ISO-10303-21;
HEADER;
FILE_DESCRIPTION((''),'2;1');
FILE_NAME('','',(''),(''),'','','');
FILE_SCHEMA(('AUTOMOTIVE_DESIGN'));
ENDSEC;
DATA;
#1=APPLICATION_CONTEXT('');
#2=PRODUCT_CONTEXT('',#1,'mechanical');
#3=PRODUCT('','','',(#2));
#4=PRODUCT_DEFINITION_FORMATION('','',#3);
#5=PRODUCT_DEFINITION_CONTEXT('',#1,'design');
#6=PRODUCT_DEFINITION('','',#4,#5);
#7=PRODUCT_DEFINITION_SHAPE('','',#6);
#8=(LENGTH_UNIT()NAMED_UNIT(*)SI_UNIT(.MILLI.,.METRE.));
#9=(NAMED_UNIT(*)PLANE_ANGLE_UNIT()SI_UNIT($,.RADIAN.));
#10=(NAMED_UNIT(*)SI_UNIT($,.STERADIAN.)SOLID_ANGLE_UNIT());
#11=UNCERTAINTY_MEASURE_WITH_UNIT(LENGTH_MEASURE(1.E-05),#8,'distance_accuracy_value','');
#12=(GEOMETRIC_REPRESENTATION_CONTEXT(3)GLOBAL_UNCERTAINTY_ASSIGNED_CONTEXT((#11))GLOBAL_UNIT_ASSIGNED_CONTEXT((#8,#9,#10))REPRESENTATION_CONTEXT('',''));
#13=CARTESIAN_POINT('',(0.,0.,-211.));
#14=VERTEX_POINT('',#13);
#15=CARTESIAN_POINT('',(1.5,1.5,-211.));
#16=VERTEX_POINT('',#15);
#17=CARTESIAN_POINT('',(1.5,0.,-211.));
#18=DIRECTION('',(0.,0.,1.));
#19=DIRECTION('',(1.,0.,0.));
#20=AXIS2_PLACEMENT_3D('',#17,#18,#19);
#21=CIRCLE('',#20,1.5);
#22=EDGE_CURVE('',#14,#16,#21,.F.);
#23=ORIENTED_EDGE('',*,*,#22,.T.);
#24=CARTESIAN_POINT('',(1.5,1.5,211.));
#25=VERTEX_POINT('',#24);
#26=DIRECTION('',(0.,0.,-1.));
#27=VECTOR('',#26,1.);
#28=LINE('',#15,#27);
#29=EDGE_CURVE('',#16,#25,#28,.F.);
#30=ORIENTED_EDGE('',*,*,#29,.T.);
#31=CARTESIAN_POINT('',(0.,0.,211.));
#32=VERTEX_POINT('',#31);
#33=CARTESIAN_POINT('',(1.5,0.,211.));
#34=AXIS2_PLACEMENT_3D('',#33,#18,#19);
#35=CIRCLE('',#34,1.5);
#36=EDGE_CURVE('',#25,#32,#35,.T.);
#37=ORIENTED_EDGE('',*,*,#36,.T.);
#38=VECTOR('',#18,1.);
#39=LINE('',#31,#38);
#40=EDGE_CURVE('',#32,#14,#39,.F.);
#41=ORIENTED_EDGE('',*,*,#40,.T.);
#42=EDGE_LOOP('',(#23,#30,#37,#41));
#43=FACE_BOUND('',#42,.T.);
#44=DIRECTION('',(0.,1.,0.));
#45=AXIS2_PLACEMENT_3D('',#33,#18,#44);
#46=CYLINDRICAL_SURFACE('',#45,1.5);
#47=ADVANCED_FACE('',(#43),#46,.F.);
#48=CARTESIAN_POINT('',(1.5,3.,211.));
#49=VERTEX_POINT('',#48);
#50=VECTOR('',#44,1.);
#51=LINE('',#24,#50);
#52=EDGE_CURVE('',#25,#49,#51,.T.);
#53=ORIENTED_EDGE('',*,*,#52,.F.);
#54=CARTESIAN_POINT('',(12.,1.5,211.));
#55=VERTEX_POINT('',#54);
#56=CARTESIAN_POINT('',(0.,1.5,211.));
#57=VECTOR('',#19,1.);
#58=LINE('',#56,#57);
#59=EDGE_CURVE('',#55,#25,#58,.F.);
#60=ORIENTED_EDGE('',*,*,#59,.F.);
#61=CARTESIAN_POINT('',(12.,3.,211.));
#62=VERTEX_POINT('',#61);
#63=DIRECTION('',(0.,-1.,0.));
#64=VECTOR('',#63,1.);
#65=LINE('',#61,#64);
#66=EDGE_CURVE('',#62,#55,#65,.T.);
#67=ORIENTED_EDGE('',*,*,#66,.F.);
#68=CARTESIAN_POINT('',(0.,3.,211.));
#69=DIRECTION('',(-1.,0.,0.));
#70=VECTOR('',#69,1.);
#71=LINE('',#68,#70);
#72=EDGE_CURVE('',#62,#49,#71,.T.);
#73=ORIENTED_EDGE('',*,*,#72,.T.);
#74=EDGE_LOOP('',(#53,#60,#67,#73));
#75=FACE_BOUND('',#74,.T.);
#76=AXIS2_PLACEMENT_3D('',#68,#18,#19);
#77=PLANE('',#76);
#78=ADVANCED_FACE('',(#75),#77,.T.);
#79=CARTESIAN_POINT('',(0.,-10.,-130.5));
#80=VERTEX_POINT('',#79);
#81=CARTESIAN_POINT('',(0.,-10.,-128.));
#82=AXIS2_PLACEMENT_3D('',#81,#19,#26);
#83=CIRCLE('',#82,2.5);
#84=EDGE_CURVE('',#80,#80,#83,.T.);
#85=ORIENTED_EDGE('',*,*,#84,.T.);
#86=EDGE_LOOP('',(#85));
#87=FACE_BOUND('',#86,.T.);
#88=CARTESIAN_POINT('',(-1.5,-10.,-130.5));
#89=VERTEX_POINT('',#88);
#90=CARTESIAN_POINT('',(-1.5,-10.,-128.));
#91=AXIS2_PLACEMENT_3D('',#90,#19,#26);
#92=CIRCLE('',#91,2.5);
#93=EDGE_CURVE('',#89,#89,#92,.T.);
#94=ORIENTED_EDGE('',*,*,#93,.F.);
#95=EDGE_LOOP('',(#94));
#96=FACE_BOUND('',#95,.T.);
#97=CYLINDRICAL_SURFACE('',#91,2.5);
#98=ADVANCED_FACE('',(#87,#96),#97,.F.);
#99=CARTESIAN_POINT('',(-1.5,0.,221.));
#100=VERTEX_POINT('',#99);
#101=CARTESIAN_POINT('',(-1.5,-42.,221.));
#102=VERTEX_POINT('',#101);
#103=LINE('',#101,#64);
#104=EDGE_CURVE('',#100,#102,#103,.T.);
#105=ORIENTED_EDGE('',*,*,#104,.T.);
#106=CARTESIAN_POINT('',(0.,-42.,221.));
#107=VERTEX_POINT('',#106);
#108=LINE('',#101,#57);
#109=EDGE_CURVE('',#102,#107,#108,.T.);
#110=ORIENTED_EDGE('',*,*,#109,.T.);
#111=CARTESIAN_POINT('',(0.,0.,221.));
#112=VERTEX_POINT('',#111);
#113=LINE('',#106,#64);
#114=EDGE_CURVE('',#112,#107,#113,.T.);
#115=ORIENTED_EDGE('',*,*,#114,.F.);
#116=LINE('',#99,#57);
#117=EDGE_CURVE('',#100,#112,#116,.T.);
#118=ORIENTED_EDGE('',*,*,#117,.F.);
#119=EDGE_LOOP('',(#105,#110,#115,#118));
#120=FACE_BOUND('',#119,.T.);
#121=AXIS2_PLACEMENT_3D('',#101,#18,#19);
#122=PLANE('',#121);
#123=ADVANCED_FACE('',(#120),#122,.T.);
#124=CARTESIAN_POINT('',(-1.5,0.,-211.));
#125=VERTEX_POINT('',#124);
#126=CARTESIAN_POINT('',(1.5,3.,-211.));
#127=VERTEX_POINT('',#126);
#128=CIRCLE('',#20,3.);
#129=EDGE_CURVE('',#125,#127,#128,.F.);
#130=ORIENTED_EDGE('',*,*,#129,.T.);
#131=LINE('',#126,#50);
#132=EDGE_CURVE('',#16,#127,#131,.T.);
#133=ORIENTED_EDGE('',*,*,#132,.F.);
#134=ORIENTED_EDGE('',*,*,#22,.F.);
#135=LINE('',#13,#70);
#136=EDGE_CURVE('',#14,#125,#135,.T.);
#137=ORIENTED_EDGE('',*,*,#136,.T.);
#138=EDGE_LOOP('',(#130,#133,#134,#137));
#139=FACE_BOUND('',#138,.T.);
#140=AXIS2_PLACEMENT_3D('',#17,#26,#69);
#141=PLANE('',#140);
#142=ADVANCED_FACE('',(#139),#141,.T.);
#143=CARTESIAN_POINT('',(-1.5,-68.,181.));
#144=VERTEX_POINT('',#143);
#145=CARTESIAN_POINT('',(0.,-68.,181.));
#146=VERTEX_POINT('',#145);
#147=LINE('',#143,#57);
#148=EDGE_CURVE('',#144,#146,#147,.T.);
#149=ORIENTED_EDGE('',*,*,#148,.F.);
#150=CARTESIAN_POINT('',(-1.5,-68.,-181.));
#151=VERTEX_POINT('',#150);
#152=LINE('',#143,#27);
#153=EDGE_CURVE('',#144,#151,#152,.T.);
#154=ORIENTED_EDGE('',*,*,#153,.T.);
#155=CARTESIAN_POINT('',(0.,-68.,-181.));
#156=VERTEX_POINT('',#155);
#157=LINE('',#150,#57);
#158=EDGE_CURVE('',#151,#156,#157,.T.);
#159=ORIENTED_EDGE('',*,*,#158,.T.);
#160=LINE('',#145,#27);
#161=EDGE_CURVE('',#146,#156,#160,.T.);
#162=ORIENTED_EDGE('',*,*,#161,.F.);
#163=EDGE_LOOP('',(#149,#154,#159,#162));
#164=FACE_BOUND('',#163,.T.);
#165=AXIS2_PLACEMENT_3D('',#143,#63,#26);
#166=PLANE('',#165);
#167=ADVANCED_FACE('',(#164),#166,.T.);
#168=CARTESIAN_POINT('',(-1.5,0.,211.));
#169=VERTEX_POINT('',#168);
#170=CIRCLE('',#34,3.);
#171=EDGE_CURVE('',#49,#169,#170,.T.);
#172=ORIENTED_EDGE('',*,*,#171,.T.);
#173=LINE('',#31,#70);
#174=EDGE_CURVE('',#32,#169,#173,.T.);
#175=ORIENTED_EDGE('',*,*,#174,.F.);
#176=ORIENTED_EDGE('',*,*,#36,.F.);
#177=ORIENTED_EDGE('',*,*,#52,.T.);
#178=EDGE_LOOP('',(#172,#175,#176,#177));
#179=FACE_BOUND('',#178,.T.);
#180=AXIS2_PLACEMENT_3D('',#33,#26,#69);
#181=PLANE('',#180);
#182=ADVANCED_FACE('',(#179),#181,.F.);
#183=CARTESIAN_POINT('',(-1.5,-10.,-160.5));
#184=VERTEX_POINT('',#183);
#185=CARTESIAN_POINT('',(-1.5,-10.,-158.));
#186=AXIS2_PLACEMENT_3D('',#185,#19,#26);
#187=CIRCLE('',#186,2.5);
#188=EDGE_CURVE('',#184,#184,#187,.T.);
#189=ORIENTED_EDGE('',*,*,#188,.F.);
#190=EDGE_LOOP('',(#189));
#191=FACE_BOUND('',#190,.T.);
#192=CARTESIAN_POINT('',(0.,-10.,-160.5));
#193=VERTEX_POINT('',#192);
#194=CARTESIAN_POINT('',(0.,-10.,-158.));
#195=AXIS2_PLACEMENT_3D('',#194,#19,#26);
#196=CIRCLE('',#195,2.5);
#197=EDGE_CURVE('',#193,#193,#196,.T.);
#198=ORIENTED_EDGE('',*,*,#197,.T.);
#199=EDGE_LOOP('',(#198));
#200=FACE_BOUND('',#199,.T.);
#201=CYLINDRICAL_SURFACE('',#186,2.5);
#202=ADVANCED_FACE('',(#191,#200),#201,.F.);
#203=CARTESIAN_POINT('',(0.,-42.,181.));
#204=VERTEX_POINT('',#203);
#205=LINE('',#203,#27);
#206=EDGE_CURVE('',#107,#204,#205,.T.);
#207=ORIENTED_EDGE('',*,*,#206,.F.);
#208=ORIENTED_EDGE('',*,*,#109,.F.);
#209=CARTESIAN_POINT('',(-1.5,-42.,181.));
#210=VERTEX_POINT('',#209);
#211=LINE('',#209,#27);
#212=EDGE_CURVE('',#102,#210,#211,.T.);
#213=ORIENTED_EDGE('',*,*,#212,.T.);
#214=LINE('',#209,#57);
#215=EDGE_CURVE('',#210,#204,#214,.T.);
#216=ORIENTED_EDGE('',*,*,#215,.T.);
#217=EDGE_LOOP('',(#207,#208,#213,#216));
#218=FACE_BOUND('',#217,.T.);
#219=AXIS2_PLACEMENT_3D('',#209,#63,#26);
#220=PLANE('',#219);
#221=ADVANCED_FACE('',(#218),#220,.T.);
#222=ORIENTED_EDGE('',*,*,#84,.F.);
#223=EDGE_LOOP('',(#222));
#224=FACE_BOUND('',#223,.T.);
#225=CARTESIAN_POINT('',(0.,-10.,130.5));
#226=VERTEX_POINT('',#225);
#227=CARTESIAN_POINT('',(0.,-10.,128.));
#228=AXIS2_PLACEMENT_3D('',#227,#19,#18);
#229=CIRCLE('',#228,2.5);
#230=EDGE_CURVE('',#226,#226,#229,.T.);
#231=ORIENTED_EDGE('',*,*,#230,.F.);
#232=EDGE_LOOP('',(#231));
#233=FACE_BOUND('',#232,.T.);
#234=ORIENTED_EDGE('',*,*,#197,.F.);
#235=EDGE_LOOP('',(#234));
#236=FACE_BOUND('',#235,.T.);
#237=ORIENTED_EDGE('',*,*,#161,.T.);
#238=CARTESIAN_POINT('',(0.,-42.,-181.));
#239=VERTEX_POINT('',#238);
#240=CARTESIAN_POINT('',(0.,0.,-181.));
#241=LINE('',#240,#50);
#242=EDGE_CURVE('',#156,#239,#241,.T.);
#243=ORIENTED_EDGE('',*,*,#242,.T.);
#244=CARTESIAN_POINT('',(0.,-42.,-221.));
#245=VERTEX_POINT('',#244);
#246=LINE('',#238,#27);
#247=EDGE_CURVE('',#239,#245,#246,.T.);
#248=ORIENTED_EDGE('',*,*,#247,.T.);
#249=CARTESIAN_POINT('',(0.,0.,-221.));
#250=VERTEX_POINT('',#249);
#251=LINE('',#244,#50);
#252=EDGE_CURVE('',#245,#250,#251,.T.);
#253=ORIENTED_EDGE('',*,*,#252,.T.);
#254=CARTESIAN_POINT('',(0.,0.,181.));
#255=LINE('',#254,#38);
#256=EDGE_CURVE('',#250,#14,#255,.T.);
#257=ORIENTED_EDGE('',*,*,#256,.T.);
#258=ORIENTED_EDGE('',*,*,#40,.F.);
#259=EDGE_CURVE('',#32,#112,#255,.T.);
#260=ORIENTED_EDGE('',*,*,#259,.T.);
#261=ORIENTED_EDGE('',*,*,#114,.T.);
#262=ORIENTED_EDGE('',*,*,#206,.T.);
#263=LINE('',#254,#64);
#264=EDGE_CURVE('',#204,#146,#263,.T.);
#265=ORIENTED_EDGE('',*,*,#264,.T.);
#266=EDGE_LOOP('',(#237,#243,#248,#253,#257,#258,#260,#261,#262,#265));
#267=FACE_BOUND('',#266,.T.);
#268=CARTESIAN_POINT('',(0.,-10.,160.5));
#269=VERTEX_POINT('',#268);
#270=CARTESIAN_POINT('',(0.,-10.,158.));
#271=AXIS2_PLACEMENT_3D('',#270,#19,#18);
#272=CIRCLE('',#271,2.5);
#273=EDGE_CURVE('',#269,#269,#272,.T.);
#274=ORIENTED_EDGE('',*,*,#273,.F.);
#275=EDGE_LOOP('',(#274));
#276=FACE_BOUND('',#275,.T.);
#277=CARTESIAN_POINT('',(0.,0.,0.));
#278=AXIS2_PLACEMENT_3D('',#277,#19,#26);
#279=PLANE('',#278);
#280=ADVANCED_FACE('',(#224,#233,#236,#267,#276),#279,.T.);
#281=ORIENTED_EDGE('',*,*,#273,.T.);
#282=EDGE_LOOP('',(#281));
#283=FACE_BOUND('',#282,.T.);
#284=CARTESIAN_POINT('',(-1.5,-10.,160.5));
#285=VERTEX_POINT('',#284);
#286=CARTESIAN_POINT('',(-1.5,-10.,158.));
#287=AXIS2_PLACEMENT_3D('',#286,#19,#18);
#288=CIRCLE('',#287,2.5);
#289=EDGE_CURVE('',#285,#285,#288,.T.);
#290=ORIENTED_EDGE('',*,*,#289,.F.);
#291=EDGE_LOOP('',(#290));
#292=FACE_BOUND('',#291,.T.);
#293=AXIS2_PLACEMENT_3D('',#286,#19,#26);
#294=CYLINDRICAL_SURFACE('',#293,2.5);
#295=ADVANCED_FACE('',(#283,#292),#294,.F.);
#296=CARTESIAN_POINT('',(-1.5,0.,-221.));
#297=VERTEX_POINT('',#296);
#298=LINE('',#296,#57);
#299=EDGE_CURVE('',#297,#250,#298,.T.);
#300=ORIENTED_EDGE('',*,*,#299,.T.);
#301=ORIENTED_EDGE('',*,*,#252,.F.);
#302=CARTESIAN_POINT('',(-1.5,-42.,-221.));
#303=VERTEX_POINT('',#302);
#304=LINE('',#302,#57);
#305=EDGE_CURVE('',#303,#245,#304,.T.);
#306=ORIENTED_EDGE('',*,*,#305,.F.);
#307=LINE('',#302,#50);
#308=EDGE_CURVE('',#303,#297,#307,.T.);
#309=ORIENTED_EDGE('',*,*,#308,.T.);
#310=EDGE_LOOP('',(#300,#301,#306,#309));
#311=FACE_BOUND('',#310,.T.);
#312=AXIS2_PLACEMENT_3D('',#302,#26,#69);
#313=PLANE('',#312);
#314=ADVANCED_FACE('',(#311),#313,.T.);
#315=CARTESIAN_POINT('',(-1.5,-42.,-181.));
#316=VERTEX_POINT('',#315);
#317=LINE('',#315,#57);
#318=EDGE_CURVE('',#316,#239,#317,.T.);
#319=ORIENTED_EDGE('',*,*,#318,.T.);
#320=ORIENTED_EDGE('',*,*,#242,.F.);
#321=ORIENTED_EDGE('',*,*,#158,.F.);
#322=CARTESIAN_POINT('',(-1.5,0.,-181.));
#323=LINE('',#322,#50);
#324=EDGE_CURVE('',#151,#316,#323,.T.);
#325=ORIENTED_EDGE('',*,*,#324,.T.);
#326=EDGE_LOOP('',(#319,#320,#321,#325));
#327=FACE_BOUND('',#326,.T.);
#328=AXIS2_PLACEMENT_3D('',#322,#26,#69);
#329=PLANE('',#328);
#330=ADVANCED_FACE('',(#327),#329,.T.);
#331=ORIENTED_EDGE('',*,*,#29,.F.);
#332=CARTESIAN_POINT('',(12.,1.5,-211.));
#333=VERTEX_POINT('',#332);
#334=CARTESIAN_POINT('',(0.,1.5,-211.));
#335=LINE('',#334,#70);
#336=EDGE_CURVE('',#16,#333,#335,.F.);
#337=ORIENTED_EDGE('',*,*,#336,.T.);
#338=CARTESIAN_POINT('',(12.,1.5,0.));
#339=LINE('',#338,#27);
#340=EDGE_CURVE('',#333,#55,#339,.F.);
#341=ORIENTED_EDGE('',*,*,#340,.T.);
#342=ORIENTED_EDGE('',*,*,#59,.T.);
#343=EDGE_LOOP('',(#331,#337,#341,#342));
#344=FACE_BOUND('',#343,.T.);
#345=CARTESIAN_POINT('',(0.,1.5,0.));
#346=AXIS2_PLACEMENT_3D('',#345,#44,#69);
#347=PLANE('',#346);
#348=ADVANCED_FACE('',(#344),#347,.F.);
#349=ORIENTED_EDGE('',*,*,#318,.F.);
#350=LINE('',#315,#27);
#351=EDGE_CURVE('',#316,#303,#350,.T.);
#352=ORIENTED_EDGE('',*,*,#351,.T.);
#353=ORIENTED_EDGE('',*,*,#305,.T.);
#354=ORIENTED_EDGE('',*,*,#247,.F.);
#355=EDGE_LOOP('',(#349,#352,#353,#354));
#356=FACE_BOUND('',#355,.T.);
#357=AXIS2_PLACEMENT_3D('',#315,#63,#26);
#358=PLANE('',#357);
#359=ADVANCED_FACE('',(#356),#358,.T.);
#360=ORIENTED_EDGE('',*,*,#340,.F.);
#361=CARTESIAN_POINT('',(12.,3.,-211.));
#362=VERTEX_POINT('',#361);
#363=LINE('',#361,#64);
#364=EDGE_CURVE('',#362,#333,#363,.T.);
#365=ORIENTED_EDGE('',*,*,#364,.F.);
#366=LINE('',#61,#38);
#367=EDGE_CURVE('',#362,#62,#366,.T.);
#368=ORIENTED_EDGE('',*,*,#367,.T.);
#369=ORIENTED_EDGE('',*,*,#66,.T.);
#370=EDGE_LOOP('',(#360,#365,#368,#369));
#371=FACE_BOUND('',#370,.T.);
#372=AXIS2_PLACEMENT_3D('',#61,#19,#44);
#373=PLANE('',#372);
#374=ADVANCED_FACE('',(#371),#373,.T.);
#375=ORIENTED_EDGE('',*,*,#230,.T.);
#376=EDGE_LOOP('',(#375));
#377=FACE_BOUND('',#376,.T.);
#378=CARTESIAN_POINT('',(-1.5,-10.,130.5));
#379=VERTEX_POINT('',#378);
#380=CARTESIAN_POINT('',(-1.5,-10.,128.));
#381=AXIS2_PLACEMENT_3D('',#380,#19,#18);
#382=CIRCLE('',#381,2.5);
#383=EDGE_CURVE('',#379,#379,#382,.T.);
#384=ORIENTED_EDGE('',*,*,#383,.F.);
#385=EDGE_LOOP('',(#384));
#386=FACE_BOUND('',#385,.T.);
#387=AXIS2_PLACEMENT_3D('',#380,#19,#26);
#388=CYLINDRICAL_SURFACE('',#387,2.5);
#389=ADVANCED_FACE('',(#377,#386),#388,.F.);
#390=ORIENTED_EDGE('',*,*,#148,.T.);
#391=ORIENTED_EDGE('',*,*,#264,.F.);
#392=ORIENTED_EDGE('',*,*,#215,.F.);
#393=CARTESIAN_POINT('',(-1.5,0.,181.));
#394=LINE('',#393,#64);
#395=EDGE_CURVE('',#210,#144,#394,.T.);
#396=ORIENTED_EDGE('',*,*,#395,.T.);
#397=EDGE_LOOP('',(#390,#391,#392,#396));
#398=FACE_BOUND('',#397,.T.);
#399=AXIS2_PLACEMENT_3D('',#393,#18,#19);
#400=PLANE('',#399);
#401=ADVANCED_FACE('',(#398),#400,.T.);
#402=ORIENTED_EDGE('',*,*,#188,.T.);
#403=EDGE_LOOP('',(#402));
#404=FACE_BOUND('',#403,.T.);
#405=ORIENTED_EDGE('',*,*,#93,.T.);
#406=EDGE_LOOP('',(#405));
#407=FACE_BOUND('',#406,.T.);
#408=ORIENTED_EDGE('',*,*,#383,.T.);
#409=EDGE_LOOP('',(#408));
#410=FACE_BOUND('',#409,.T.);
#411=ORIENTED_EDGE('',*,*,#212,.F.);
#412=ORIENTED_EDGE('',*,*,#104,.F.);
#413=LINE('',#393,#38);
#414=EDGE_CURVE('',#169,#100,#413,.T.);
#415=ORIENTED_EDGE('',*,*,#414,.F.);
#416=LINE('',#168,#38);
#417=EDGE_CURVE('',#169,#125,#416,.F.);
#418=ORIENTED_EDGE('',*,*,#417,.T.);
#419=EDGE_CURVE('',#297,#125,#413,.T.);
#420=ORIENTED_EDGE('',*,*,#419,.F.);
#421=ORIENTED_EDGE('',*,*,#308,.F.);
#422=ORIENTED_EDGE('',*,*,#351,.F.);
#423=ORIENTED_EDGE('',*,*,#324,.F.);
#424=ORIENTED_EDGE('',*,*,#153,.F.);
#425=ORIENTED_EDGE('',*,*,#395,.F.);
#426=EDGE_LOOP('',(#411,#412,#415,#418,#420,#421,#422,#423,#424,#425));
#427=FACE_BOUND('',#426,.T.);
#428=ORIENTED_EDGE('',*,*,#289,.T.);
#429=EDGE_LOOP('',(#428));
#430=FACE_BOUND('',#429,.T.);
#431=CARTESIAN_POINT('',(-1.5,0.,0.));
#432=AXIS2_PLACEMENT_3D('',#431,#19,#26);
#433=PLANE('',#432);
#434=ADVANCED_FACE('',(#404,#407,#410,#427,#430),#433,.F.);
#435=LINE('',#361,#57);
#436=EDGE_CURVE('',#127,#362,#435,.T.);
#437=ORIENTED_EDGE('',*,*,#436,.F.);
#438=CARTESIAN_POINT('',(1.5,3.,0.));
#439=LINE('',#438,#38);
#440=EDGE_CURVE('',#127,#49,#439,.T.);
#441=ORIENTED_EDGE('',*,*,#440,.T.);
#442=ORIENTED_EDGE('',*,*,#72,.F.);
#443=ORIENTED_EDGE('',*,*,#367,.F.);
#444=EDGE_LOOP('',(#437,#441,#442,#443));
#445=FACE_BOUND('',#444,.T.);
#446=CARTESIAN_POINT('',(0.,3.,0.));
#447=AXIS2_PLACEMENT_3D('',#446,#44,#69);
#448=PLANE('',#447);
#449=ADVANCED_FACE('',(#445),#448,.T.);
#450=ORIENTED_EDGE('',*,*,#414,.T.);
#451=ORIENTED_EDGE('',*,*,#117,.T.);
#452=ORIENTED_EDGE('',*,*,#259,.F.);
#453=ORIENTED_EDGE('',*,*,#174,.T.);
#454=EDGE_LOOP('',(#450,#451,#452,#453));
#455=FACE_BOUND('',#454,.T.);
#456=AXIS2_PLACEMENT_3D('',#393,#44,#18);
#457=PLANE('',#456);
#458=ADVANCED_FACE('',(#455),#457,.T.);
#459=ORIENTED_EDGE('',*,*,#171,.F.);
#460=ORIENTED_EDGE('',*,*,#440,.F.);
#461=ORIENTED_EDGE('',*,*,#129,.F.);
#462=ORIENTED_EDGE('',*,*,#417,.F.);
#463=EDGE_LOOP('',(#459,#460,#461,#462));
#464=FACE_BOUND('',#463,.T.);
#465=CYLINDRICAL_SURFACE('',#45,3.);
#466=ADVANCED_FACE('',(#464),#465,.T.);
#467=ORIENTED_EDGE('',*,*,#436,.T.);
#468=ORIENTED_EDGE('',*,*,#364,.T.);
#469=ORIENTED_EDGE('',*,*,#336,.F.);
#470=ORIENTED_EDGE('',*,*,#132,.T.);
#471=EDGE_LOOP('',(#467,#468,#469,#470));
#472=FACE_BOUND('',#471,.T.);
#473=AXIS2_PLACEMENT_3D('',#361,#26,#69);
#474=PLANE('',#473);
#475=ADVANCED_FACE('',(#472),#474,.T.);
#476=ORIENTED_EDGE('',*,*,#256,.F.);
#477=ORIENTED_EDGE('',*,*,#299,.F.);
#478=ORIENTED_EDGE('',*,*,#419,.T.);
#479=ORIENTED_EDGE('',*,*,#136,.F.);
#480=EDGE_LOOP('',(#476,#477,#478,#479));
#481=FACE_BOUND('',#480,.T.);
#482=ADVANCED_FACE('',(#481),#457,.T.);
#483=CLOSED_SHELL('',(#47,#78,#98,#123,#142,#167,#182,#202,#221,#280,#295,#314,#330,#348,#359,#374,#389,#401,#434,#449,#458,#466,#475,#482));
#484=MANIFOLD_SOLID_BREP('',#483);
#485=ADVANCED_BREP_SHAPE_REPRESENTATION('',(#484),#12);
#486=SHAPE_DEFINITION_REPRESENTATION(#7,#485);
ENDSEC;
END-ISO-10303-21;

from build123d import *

# Parameters (mm, degrees)
SKETCH_1_W               = 362
SKETCH_1_H               = 68
SM_BASE_FLANGE_1_DEPTH   = 1.5
SKETCH_6_R               = 2.5
CUT_EXTRUDE_1_DEPTH      = 10
SKETCH_7_W               = 40
SKETCH_7_H               = 42
SM_BASE_FLANGE_1_2_DEPTH = 1.5
SM_EDGE_FLANGE_1_DEPTH   = 422


# Sheet-metal steps are written as plain solids
with BuildPart() as part:
    # Sketch 1 → Sm Base Flange 1 (new body)
    with BuildSketch(Plane(origin=(0, 0, 0), x_dir=(0, 0, -1), z_dir=(1, 0, 0))):
        with Locations((0, -34)):
            Rectangle(SKETCH_1_W, SKETCH_1_H)
    extrude(amount=-SM_BASE_FLANGE_1_DEPTH)

    # Эскиз6 → Вырез-Вытянуть1 (cut)
    with BuildSketch(Plane(origin=(0, 0, 0), x_dir=(0, 0, -1), z_dir=(1, 0, 0))):
        with Locations((158, -10)):
            Circle(SKETCH_6_R)
        with Locations((128, -10)):
            Circle(SKETCH_6_R)
        with Locations(Location((-128, -10, 0), (0, 0, 180))):
            Circle(SKETCH_6_R)
        with Locations(Location((-158, -10, 0), (0, 0, 180))):
            Circle(SKETCH_6_R)
    extrude(amount=-CUT_EXTRUDE_1_DEPTH, mode=Mode.SUBTRACT)

    # Эскиз7 → Sm Base Flange 1 2 (add)
    with BuildSketch(Plane(origin=(0, 0, 0), x_dir=(0, 0, -1), z_dir=(1, 0, 0))):
        with Locations((-201, -21)):
            Rectangle(SKETCH_7_W, SKETCH_7_H)
        with Locations((201, -21)):
            Rectangle(SKETCH_7_W, SKETCH_7_H)
    extrude(amount=-SM_BASE_FLANGE_1_2_DEPTH)

    # Ребро-кромка1 section (across the edge) → Ребро-кромка1 (add)
    with BuildSketch(Plane(origin=(0, 1.5, -211), x_dir=(0, -1, 0), z_dir=(0, 0, 1))):
        with BuildLine():
            Line((-1.5, 1.5), (-1.5, 12))
            Line((-1.5, 12), (0, 12))
            Line((0, 12), (0, 1.5))
            ThreePointArc((0, 1.5), (0.439339828, 0.439339828), (1.5, 0))
            Line((1.5, 0), (1.5, -1.5))
            ThreePointArc((1.5, -1.5), (-0.621320344, -0.621320344), (-1.5, 1.5))
        make_face()
    extrude(amount=SM_EDGE_FLANGE_1_DEPTH)


solid = part.part
